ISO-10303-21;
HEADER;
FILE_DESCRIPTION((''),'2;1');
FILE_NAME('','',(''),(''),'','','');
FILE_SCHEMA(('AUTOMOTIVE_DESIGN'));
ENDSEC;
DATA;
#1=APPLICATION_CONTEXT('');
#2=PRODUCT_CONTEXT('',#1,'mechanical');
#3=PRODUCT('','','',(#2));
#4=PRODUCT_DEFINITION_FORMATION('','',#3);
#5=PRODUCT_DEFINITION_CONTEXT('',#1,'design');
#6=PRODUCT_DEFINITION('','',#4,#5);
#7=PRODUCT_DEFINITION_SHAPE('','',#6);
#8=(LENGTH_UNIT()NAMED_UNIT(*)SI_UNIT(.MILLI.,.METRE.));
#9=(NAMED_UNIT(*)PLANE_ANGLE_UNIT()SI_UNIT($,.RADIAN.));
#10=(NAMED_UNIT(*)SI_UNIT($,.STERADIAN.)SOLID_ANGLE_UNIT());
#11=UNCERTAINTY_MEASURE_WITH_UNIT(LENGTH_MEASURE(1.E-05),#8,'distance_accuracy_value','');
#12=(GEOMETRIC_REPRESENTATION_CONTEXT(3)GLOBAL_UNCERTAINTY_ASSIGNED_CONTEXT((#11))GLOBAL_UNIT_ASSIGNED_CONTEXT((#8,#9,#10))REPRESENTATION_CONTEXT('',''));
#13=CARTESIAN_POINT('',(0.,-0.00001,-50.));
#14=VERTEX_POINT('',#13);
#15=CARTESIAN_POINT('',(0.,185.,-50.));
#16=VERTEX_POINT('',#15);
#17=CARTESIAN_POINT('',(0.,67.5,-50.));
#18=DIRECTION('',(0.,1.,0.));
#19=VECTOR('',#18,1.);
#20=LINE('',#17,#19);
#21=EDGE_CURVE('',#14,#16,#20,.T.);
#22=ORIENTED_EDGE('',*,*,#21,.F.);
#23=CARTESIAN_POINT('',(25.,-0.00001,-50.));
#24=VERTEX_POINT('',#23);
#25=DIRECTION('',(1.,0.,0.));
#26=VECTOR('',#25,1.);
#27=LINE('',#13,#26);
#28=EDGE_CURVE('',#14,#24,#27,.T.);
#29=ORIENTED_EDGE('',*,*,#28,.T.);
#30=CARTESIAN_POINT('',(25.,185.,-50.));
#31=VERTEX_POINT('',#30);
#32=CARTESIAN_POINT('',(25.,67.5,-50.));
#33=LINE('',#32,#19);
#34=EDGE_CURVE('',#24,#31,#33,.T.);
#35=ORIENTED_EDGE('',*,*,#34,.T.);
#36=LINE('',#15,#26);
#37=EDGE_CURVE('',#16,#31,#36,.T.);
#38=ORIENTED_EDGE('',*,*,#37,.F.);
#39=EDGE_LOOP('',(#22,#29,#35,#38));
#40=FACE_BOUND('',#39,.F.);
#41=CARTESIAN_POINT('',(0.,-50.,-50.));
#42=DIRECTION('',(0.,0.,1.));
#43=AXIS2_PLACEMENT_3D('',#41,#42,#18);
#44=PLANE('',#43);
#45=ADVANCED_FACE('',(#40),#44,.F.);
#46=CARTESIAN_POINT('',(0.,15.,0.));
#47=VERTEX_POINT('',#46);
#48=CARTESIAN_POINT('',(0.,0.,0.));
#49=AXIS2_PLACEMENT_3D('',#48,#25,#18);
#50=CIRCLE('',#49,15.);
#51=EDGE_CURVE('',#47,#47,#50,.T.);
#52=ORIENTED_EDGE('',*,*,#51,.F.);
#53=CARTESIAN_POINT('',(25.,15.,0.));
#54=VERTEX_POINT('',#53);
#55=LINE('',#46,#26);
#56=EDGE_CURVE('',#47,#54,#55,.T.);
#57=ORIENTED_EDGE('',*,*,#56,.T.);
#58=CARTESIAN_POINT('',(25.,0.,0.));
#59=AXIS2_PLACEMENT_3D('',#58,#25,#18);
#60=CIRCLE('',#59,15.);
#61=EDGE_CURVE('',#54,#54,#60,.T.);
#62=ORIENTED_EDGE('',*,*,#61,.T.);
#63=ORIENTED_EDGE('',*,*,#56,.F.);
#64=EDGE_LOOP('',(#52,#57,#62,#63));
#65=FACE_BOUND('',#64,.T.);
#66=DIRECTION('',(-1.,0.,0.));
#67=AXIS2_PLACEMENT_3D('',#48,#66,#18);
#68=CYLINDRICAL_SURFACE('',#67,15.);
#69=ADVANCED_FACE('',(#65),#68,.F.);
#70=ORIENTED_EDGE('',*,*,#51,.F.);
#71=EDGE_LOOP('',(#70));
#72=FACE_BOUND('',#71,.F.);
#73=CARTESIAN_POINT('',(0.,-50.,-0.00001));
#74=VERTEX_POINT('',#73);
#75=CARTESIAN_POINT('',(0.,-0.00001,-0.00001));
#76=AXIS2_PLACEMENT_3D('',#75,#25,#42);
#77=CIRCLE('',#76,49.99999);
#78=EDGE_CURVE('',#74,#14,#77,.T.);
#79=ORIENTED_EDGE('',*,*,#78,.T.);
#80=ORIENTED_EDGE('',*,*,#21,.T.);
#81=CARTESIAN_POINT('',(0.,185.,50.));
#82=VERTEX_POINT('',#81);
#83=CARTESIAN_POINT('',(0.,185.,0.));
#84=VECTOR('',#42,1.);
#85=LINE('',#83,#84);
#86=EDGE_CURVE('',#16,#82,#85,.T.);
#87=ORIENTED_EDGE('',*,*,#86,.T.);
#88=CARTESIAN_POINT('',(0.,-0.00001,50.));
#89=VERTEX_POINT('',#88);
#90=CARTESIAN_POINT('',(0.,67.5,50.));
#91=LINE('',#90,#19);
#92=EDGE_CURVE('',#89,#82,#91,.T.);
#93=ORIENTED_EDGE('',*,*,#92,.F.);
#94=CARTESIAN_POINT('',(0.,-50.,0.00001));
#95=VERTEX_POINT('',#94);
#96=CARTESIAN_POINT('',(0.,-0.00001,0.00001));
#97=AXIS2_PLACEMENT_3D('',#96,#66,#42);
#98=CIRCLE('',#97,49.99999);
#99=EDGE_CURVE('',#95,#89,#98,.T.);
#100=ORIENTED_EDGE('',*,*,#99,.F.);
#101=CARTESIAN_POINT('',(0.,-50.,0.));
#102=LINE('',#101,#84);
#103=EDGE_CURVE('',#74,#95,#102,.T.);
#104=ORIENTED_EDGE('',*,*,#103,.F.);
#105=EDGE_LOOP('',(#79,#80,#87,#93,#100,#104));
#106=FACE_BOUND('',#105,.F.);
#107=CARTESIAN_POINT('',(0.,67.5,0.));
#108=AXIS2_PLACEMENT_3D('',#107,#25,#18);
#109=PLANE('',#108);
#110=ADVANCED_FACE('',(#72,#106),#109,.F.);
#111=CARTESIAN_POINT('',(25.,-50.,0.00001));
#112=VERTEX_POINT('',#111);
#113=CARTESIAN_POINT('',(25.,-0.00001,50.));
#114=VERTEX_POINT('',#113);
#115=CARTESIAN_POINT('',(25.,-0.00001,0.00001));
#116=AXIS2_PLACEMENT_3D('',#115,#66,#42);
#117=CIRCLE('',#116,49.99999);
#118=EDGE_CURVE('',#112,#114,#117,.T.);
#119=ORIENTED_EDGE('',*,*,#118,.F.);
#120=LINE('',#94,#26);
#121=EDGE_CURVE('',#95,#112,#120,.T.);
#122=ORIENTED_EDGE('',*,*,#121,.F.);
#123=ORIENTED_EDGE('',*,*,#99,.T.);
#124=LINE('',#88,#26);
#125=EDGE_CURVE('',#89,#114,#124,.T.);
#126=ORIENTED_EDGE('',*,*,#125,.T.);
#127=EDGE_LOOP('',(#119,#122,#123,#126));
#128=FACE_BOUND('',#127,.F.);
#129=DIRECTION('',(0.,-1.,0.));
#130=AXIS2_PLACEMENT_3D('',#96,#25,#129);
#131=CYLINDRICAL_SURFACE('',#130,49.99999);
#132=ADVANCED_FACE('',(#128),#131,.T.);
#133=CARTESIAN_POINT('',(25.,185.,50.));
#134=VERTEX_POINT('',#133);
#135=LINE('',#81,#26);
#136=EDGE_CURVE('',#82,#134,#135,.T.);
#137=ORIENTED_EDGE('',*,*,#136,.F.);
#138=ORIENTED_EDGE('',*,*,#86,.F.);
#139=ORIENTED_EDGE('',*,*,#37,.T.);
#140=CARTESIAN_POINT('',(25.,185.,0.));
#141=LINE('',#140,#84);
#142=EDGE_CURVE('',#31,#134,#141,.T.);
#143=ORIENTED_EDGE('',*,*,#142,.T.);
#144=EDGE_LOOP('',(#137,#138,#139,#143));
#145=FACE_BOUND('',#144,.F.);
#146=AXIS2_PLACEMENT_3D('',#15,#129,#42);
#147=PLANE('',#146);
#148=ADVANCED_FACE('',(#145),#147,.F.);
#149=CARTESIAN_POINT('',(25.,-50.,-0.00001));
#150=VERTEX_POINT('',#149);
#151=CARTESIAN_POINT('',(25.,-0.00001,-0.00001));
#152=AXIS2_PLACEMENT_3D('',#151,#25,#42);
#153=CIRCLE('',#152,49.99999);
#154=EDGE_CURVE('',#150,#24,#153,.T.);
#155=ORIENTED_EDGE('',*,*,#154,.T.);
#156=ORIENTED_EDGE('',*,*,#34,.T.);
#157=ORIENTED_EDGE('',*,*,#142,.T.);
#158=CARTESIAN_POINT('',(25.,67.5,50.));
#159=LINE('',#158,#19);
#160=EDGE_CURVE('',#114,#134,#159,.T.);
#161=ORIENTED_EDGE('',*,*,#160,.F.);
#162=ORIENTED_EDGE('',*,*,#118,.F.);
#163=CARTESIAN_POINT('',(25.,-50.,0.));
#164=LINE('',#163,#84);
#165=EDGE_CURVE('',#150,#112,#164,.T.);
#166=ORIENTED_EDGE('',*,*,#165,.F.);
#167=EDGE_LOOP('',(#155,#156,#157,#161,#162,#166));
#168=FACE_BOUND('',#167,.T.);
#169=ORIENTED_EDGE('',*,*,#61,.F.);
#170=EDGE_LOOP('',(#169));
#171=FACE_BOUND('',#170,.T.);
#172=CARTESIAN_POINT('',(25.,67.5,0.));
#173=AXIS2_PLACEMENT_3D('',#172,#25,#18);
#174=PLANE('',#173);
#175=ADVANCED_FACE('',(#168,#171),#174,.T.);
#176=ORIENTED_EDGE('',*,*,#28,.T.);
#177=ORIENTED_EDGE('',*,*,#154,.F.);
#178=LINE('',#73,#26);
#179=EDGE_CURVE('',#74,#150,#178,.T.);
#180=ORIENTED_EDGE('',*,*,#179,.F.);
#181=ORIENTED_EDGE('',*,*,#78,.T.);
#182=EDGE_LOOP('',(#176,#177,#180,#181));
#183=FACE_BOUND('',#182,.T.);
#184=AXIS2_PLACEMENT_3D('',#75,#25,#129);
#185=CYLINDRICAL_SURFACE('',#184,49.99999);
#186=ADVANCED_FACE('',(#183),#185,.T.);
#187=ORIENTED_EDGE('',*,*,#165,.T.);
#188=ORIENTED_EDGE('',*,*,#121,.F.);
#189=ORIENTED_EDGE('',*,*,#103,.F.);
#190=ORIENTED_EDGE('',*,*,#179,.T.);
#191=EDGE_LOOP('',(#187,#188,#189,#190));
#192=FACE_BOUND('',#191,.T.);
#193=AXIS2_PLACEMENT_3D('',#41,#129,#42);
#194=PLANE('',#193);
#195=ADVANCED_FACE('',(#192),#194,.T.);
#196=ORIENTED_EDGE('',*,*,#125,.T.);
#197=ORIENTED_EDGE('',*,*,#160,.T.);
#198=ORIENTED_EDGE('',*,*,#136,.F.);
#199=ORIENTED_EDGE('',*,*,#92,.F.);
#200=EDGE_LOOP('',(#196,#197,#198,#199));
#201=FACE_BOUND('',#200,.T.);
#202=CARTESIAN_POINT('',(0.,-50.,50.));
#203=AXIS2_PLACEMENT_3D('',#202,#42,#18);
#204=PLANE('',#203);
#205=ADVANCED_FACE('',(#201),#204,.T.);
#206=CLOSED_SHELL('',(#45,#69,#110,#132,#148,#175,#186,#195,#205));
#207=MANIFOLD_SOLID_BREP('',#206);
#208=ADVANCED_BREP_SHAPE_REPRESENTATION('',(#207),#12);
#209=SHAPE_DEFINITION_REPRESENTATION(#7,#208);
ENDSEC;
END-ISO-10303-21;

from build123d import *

# Parameters (mm, degrees)
F0_W     = 235
F0_H     = 100
F0_R     = 15
F1_DEPTH = 25
F2_R     = 49.99999


# Not quite as in the source:
# - a fillet or chamfer is up to 0.001 mm smaller than in the source, because OpenCascade refuses the exact size


with BuildPart() as f1:
    # F0 (on Right) → F1 (new body)
    with BuildSketch(Plane.YZ):
        with Locations((67.5, 0)):
            Rectangle(F0_W, F0_H)
        Circle(F0_R, mode=Mode.SUBTRACT)
    extrude(amount=F1_DEPTH)

    # F2 (radius 50 in the source; OpenCascade refuses exactly that, so slightly less here)
    f2_edges = [f1.edges().sort_by_distance(p)[0] for p in [
        (12.5, -50, 50),
        (12.5, -50, -50),
    ]]
    fillet(f2_edges, radius=F2_R)


solid = f1.part
